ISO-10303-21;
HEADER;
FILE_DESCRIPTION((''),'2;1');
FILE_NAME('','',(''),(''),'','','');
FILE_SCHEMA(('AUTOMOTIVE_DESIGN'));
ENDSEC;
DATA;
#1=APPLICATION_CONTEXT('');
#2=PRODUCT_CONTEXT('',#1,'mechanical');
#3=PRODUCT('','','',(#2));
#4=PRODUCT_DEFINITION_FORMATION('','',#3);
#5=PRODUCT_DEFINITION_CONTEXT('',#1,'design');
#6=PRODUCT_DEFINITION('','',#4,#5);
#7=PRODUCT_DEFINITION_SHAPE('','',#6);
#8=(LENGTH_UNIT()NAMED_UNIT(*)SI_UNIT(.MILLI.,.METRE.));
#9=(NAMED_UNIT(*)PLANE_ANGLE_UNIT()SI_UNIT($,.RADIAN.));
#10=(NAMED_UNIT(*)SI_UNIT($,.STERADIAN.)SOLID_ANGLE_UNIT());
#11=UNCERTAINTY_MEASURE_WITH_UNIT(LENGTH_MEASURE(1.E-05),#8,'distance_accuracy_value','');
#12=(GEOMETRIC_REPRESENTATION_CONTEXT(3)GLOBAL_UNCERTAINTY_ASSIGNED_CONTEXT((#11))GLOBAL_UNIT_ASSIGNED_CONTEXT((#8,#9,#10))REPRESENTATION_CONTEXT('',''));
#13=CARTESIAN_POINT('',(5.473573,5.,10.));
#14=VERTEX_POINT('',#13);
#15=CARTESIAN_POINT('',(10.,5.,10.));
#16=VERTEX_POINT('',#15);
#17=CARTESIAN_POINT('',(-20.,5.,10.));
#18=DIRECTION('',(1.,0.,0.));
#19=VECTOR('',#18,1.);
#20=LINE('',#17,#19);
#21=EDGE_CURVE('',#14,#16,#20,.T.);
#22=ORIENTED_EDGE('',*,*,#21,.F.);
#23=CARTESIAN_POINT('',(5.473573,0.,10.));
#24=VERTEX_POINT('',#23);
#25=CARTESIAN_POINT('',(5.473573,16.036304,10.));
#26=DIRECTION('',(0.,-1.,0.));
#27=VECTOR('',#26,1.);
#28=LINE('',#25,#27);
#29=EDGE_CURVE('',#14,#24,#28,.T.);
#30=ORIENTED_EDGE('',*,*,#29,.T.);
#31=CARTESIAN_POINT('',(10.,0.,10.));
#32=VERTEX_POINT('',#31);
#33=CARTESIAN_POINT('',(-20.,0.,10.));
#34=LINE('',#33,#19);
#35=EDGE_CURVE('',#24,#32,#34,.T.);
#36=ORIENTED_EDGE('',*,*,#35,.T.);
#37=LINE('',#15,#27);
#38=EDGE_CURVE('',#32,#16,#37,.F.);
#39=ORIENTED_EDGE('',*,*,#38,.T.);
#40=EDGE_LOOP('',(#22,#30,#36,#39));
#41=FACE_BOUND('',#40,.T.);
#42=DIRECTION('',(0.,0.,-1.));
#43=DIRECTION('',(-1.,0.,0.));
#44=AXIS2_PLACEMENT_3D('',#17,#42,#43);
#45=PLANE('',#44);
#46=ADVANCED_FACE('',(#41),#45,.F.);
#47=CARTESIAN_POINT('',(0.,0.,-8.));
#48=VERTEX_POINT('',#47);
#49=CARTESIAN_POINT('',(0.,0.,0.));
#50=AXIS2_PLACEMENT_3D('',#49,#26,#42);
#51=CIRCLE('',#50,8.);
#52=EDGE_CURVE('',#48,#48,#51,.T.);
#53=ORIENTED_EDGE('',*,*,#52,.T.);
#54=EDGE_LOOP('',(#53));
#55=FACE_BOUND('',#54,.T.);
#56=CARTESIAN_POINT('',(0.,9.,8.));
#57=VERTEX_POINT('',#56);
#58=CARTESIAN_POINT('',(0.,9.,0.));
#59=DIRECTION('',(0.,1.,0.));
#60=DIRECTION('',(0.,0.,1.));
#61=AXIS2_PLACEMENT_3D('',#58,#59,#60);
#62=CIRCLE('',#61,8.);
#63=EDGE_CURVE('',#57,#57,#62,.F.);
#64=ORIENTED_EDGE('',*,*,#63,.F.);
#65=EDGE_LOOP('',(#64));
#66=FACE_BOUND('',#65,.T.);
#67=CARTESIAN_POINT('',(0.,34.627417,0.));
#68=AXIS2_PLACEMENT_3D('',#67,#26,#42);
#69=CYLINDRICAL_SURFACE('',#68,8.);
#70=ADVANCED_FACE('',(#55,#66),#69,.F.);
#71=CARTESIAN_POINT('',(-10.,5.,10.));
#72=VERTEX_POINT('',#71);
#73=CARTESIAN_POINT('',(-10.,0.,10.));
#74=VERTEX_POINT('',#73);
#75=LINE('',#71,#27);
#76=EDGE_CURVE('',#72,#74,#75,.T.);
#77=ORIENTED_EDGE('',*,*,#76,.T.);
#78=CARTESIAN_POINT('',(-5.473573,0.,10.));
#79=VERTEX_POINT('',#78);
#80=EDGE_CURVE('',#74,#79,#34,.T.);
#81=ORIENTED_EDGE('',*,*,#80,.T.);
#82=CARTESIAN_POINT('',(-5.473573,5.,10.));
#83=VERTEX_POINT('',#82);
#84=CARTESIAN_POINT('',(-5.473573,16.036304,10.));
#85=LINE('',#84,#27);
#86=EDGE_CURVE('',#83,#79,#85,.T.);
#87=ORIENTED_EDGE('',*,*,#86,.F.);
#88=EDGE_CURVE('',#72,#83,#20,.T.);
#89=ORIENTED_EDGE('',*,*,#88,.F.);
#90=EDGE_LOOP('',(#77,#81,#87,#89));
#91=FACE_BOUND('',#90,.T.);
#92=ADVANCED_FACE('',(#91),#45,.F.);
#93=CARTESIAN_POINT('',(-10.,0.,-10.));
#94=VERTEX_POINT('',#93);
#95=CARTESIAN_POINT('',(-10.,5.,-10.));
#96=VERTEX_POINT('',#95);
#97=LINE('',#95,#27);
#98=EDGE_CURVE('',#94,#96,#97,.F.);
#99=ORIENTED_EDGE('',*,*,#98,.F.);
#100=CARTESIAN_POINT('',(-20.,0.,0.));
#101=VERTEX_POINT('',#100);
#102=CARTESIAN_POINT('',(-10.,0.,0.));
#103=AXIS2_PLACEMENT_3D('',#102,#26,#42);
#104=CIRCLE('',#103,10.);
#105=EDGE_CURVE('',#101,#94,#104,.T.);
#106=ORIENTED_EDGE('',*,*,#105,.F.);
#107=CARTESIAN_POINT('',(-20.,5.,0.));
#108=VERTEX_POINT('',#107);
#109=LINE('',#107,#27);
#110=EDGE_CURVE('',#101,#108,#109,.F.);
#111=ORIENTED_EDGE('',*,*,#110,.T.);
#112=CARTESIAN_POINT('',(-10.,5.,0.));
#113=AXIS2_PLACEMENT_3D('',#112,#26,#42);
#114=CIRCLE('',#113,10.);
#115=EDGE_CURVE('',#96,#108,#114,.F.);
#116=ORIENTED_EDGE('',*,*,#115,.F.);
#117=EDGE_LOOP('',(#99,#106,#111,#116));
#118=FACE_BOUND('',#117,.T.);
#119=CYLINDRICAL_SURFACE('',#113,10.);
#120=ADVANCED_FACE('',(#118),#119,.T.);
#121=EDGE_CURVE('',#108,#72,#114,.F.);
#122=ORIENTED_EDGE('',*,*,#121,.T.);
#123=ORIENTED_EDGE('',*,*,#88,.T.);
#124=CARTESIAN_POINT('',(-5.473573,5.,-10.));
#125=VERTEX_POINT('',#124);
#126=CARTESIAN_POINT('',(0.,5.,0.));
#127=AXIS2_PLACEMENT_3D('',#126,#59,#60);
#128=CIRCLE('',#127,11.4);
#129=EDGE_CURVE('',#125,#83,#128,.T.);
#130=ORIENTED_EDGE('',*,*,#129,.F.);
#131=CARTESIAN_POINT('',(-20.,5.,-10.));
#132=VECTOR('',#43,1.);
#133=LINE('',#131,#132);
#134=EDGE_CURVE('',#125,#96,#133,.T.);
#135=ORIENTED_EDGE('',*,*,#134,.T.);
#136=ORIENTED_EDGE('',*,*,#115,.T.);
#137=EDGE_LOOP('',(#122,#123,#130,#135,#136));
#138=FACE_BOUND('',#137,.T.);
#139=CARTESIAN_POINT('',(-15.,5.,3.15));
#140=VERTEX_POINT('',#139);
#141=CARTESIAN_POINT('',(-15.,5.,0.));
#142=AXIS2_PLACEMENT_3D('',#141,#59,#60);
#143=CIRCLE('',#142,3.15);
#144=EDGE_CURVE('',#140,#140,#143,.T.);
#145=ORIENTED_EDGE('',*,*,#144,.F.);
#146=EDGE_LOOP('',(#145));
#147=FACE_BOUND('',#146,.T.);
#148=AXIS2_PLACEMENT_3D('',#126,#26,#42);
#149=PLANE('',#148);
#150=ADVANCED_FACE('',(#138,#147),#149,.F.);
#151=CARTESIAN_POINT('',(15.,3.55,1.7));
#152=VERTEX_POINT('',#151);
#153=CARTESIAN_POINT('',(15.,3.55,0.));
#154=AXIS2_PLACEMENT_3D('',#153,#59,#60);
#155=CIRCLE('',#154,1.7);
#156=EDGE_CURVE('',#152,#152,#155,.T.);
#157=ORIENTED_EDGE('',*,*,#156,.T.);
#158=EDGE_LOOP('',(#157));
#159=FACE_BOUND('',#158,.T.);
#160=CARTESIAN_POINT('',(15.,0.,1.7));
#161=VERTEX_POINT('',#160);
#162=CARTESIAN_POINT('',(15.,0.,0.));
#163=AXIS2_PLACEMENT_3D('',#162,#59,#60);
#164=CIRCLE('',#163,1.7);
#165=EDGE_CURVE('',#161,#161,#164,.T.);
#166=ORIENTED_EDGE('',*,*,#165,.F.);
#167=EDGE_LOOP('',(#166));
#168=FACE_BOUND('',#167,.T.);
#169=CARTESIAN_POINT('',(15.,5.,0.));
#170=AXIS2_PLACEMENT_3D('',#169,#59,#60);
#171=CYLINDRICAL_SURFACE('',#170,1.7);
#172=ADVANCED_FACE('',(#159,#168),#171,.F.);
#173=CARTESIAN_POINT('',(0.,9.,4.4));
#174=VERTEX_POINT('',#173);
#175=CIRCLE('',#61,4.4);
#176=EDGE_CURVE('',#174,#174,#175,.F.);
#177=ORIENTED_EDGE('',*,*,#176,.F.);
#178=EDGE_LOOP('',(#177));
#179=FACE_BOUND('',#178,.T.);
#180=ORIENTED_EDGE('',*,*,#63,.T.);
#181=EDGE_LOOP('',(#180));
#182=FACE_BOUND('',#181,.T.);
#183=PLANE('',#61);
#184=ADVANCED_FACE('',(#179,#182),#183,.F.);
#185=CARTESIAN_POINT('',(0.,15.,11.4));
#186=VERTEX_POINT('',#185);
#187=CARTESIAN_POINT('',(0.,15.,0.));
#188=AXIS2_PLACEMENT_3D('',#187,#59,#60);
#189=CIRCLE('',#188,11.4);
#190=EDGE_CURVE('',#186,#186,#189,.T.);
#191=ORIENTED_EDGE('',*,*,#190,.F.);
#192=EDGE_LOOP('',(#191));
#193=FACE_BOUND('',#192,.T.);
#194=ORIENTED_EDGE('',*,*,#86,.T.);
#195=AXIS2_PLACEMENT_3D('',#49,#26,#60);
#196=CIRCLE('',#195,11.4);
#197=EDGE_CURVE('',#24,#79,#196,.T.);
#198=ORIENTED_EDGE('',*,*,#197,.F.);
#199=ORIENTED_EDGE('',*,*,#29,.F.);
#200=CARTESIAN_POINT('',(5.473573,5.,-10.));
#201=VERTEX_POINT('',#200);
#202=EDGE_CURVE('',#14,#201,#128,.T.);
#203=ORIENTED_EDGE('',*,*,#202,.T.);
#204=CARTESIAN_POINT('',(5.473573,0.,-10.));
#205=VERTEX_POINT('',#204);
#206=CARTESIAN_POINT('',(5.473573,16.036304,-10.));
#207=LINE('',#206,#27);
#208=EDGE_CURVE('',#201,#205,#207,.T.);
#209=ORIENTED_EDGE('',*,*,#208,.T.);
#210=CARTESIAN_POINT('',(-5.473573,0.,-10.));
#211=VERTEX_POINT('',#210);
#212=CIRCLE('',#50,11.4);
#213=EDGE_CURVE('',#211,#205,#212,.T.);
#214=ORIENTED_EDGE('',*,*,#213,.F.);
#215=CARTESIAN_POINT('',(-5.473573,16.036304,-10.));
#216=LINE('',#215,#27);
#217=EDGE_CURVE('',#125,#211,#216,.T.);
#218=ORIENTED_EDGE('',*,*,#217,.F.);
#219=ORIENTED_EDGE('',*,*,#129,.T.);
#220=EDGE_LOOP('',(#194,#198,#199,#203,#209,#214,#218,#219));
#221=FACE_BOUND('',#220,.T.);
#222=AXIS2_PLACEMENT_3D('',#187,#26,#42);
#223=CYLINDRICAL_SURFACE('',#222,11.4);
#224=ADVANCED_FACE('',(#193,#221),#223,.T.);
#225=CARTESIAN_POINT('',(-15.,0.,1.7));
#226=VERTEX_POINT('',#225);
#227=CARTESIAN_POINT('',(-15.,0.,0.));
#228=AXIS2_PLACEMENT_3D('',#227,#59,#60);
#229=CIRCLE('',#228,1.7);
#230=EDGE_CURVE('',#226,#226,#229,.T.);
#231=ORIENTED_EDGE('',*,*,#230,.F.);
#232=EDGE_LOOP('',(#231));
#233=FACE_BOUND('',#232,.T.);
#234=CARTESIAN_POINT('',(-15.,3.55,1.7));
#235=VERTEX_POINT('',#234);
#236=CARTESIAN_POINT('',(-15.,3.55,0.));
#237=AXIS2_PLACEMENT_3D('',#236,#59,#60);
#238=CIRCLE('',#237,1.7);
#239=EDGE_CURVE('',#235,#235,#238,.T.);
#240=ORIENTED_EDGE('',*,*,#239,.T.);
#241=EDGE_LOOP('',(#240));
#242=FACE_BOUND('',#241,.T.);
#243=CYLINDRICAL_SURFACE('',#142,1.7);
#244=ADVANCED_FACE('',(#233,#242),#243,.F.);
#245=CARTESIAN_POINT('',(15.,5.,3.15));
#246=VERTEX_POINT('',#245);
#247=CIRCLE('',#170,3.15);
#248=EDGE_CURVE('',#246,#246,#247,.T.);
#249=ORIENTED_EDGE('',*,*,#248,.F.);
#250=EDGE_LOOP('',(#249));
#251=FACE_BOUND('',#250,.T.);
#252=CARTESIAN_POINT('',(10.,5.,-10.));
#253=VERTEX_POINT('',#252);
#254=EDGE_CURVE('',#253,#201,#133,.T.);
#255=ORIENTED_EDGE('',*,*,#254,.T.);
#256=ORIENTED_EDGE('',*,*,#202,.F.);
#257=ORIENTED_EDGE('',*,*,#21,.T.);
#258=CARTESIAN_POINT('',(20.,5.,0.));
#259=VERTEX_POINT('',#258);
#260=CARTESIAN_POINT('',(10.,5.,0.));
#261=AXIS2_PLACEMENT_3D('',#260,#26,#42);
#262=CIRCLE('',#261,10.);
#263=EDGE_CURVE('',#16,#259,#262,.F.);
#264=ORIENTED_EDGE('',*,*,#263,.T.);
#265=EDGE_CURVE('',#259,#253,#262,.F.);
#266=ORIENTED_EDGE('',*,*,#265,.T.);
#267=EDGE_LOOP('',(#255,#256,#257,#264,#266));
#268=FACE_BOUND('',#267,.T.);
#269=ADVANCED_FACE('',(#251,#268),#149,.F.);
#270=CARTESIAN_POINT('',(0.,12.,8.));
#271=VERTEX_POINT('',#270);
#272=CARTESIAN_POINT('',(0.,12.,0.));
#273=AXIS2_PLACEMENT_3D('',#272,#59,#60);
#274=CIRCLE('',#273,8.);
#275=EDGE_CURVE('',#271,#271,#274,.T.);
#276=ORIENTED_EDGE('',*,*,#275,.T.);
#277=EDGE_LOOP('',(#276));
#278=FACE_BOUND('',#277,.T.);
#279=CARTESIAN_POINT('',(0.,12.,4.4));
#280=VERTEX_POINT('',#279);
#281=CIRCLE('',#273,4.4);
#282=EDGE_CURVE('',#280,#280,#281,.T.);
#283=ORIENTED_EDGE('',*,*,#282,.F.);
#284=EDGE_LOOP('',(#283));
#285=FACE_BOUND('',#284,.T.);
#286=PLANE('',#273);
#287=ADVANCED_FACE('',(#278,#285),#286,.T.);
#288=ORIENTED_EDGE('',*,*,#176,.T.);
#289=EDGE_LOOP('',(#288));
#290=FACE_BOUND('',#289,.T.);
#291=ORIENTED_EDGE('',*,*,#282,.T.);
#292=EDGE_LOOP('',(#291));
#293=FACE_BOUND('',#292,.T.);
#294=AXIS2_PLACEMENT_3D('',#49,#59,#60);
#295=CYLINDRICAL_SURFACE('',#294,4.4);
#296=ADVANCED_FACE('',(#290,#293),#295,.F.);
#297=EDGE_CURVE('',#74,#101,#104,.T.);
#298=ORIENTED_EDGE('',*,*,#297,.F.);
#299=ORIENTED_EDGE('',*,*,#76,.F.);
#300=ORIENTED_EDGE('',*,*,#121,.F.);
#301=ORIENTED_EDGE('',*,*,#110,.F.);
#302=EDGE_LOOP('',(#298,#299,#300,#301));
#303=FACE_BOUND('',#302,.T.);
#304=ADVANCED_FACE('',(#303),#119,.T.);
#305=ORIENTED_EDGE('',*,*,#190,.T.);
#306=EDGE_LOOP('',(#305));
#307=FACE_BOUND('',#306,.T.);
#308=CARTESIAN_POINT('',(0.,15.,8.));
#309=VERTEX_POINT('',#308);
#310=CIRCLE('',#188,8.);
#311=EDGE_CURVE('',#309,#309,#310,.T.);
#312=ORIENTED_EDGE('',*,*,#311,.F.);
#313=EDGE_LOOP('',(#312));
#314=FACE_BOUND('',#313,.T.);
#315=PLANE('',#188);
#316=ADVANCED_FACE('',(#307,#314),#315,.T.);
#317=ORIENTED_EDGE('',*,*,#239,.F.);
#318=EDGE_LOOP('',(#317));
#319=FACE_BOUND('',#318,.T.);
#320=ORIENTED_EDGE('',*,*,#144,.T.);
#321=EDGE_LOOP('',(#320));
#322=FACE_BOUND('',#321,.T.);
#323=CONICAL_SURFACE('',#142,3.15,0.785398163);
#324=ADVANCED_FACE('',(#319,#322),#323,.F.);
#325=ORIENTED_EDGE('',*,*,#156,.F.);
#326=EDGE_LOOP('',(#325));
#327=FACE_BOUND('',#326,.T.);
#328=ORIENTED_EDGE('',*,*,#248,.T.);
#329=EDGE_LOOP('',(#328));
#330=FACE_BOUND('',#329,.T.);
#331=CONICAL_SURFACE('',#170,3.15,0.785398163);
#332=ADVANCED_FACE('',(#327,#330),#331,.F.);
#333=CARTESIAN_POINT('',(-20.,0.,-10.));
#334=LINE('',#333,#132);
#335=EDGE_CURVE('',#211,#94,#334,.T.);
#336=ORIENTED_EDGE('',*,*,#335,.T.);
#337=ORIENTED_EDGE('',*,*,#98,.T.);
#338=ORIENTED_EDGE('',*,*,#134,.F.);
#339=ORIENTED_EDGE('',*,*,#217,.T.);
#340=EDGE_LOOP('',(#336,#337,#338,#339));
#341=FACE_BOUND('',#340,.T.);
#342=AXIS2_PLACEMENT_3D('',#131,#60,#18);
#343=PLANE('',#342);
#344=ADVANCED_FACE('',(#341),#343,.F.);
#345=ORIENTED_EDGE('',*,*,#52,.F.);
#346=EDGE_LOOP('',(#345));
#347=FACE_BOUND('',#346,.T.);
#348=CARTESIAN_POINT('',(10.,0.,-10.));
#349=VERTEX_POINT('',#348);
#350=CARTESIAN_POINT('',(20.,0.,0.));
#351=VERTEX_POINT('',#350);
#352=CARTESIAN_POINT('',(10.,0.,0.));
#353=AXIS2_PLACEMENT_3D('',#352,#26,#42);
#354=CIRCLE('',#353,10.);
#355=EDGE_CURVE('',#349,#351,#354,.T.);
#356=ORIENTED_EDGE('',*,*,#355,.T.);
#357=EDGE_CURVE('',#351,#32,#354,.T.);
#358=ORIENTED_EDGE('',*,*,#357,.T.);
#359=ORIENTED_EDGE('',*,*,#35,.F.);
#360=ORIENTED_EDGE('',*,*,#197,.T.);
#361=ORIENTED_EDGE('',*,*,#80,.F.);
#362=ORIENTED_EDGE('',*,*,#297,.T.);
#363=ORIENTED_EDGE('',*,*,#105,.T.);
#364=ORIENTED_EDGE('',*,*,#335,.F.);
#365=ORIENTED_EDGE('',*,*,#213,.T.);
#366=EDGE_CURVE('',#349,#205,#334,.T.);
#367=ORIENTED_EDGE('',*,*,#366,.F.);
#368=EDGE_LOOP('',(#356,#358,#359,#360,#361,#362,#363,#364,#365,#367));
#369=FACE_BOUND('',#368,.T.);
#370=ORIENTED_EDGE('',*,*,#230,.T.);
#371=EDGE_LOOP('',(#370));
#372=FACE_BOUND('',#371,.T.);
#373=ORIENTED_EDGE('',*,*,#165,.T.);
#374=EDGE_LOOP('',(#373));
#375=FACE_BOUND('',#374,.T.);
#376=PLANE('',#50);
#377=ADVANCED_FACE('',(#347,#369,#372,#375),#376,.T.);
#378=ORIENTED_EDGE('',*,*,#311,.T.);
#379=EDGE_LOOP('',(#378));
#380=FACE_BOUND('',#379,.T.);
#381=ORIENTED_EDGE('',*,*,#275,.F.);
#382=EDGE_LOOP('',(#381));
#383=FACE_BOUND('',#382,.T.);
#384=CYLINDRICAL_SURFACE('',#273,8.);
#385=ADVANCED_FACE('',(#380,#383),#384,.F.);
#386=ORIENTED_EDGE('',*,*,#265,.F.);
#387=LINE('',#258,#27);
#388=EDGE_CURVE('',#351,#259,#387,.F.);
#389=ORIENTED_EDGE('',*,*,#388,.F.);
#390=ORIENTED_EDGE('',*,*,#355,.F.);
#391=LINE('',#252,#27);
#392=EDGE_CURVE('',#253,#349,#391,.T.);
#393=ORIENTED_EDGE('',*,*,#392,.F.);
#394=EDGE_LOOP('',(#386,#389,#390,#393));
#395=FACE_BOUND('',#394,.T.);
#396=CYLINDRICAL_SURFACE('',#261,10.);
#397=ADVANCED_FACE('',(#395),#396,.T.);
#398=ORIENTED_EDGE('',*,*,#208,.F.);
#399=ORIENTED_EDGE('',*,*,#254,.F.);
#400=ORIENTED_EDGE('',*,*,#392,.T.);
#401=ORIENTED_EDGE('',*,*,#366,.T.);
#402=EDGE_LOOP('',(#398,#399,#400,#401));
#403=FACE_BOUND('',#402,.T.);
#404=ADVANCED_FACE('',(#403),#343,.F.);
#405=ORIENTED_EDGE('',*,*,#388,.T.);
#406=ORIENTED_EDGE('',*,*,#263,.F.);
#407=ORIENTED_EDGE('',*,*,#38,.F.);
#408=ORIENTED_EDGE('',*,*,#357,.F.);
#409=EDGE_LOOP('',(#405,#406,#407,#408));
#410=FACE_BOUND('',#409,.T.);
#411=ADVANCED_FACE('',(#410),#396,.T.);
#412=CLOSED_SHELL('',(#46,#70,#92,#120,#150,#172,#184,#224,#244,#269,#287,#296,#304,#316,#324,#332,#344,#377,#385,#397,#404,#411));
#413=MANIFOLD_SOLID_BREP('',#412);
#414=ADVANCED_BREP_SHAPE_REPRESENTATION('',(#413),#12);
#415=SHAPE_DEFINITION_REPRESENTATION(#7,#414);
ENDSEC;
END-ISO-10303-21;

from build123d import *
from build123d.topology import SkipClean

# Parameters (mm, degrees)
SKETCH1_W                                       = 40
SKETCH1_H                                       = 20
BOSS_EXTRUDE1_DEPTH                             = 5
CSK_FOR_M3_FLAT_HEAD_MACHINE_SCREW1_D           = 3.4
CSK_FOR_M3_FLAT_HEAD_MACHINE_SCREW1_CSINK_D     = 6.3
CSK_FOR_M3_FLAT_HEAD_MACHINE_SCREW1_CSINK_ANGLE = 90
SKETCH4_R                                       = 4.4
CUT_EXTRUDE1_DEPTH                              = 5
BOSS_EXTRUDE2_START                             = 10
SKETCH5_R                                       = 11.4
SKETCH5_R_2                                     = 4.4
BOSS_EXTRUDE2_DEPTH                             = 10
FILLET1_R                                       = 10
SKETCH6_R                                       = 8
SKETCH6_R_2                                     = 4.4
CUT_EXTRUDE2_DEPTH                              = 3
CUT_EXTRUDE3_START                              = -9
SKETCH7_R                                       = 8
CUT_EXTRUDE3_DEPTH                              = 9
BOSS_EXTRUDE3_START                             = -5
BOSS_EXTRUDE3_DEPTH                             = 5


with BuildPart() as part:
    # Sketch1 → Boss-Extrude1 (new body)
    with BuildSketch(Plane(origin=(0, 0, 0), x_dir=(1, 0, 0), z_dir=(0, 1, 0))):
        Rectangle(SKETCH1_W, SKETCH1_H)
    extrude(amount=BOSS_EXTRUDE1_DEPTH)

    # CSK for M3 Flat Head Machine Screw1 (through all)
    with Locations(Plane(origin=(0, 5, 0), x_dir=(1, 0, 0), z_dir=(0, 1, 0))):
        with Locations((15, 0), (-15, 0)):
            CounterSinkHole(CSK_FOR_M3_FLAT_HEAD_MACHINE_SCREW1_D / 2, CSK_FOR_M3_FLAT_HEAD_MACHINE_SCREW1_CSINK_D / 2, counter_sink_angle=CSK_FOR_M3_FLAT_HEAD_MACHINE_SCREW1_CSINK_ANGLE)

    # Sketch4 → Cut-Extrude1 (cut)
    with BuildSketch(Plane(origin=(0, 5, 0), x_dir=(1, 0, 0), z_dir=(0, 1, 0))):
        with Locations(Location((0, 0, 0), (0, 0, 270))):
            Circle(SKETCH4_R)
    extrude(amount=-CUT_EXTRUDE1_DEPTH, mode=Mode.SUBTRACT)

    # Sketch5 → Boss-Extrude2 (add)
    with BuildSketch(Plane(origin=(0, 5, 0), x_dir=(1, 0, 0), z_dir=(0, 1, 0)).offset(BOSS_EXTRUDE2_START)):
        with Locations(Location((0, 0, 0), (0, 0, 61.305586473))):
            Circle(SKETCH5_R)
        with Locations(Location((0, 0, 0), (0, 0, 270))):
            Circle(SKETCH5_R_2, mode=Mode.SUBTRACT)
    extrude(amount=-BOSS_EXTRUDE2_DEPTH)

    # Fillet1
    fillet1_edges = [part.edges().sort_by_distance(p)[0] for p in [
        (20, 2.5, 10),
        (-20, 2.5, -10),
        (20, 2.5, -10),
        (-20, 2.5, 10),
    ]]
    fillet(fillet1_edges, radius=FILLET1_R - 0.0001)  # a hair under: the kernel refuses the full size

    # Sketch6 → Cut-Extrude2 (cut)
    with BuildSketch(Plane(origin=(0, 15, 0), x_dir=(1, 0, 0), z_dir=(0, 1, 0))):
        with Locations(Location((0, 0, 0), (0, 0, 270))):
            Circle(SKETCH6_R)
        with Locations(Location((0, 0, 0), (0, 0, 270))):
            Circle(SKETCH6_R_2, mode=Mode.SUBTRACT)
    extrude(amount=-CUT_EXTRUDE2_DEPTH, mode=Mode.SUBTRACT)

    # Sketch7 → Cut-Extrude3 (cut)
    with BuildSketch(Plane.XZ.offset(CUT_EXTRUDE3_START)):
        with Locations(Location((0, 0, 0), (0, 0, 90))):
            Circle(SKETCH7_R)
    extrude(amount=CUT_EXTRUDE3_DEPTH, mode=Mode.SUBTRACT)

    # Sketch8 → Boss-Extrude3 (add)
    with SkipClean():  # the faces are left unmerged after this step: merging them gives an invalid solid
        with BuildSketch(Plane.XZ.offset(BOSS_EXTRUDE3_START)):
            with BuildLine():
                Line((-5.473572873, 10), (5.473572873, 10))
                ThreePointArc((5.473572873, 10), (0, 11.4), (-5.473572873, 10))
            make_face()
            with BuildLine():
                Line((-5.473572873, -10), (5.473572873, -10))
                ThreePointArc((5.473572873, -10), (0, -11.4), (-5.473572873, -10))
            make_face()
        extrude(amount=BOSS_EXTRUDE3_DEPTH)


solid = part.part
